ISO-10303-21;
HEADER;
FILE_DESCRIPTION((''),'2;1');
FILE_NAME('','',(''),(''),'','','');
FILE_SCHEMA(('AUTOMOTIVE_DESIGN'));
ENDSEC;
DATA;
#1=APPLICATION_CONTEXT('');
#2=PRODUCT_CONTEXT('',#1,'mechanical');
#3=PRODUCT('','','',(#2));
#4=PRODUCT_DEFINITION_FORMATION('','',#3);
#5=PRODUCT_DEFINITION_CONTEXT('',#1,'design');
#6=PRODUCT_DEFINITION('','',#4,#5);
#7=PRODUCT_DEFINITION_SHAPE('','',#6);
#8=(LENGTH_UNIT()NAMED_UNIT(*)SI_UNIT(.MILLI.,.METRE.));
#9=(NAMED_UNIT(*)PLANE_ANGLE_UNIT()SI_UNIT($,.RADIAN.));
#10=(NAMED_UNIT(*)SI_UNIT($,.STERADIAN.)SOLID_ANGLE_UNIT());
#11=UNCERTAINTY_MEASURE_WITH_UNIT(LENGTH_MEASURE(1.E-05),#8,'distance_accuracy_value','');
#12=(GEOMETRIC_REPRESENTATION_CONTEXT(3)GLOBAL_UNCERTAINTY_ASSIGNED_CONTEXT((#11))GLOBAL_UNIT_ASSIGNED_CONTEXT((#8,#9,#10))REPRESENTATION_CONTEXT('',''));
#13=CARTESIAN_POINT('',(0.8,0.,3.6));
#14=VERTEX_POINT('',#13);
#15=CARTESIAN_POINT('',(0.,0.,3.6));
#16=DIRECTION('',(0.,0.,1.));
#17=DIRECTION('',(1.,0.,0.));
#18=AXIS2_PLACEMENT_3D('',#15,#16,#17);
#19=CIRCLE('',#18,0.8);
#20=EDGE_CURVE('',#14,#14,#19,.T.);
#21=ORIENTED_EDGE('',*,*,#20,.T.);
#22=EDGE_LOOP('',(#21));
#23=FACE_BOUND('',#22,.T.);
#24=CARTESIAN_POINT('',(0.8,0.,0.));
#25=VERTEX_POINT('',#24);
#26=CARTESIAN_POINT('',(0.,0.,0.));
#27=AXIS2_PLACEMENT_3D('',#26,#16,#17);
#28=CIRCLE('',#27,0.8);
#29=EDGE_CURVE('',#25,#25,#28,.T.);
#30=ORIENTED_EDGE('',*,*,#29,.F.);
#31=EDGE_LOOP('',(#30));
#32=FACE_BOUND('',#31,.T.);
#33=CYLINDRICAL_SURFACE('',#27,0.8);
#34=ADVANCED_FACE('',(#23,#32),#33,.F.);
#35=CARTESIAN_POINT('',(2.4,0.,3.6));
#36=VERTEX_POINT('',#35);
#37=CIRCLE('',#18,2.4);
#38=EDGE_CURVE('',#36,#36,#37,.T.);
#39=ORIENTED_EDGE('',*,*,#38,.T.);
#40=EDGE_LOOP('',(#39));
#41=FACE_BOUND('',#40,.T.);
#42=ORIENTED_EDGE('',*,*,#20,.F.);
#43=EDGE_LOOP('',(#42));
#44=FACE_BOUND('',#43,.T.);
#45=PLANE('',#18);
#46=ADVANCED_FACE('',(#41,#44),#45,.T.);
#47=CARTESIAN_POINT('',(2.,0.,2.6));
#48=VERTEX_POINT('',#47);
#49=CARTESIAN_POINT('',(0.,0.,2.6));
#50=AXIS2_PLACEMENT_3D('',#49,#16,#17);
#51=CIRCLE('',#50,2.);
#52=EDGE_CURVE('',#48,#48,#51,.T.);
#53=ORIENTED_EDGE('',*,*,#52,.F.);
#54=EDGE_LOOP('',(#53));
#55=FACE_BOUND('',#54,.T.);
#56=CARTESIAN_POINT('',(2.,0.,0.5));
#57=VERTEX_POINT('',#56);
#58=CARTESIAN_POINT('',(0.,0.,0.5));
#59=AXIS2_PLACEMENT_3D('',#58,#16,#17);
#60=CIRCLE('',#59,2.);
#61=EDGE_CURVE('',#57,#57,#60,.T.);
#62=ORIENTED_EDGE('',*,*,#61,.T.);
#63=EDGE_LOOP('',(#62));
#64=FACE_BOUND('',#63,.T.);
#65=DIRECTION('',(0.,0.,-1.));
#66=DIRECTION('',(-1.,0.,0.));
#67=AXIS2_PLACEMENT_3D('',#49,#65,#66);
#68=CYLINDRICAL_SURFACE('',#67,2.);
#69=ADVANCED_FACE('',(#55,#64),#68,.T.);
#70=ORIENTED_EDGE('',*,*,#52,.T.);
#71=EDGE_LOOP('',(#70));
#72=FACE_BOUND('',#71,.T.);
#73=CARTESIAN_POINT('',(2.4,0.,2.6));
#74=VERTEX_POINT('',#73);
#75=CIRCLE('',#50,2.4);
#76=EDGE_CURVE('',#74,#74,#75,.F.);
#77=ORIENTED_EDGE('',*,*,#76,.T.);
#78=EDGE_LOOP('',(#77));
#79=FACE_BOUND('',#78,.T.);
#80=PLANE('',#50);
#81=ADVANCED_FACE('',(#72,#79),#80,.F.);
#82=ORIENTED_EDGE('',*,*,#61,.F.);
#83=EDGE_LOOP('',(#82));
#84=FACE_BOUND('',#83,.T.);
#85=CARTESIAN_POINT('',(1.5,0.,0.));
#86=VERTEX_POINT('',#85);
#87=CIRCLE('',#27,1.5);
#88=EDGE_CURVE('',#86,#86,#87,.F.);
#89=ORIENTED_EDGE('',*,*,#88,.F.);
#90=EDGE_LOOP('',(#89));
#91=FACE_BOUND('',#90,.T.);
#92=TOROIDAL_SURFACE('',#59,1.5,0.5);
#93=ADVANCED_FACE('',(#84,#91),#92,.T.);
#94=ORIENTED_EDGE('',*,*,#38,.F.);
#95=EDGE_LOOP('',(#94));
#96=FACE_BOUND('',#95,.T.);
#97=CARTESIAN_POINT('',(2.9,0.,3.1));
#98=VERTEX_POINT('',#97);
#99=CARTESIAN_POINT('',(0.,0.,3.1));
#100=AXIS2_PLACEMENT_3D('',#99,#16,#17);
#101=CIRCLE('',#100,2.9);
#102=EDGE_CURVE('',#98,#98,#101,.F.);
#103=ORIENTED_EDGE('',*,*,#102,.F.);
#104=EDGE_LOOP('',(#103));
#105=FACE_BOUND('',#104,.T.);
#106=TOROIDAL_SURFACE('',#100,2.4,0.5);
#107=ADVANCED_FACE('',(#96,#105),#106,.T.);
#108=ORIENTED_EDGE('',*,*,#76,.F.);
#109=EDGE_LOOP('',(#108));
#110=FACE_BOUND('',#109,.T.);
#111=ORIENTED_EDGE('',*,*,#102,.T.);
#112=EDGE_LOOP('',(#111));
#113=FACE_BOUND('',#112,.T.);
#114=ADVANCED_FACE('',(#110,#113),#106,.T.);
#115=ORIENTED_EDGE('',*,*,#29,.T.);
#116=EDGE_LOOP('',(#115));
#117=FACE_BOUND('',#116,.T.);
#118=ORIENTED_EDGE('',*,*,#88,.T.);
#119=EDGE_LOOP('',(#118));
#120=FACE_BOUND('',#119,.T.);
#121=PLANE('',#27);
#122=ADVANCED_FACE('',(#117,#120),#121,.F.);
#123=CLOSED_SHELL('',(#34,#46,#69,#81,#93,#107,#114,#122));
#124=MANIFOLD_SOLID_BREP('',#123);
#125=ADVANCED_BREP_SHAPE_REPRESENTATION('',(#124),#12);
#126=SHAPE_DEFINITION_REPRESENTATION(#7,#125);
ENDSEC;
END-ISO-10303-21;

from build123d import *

# Parameters (mm, degrees)
SKETCH_1_R               = 2
EXTRUDE_1_DEPTH          = 2.6
SKETCH_2_R               = 2.9
EXTRUDE_2_DEPTH          = 1
CUT_EXTRUDE_1_DEPTH      = 6.45710546
CUT_EXTRUDE_1_DEPTH_BACK = 6.45710546
SKETCH_3_R               = 0.8
FILLET_2_R               = 0.5


with BuildPart() as part:
    # 草图1 → 凸台-拉伸1 (new body)
    with BuildSketch(Plane.XY):
        Circle(SKETCH_1_R)
    extrude(amount=EXTRUDE_1_DEPTH)

    # 草图2 → 凸台-拉伸2 (add)
    with BuildSketch(Plane.XY.offset(2.6)):
        Circle(SKETCH_2_R)
    extrude(amount=EXTRUDE_2_DEPTH)

    # 草图3 → 切除-拉伸1 (cut, two sides: drawn at the far end of the back side and taken through both)
    with BuildSketch(Plane.XY.offset(3.6).offset(-CUT_EXTRUDE_1_DEPTH_BACK)):
        Circle(SKETCH_3_R)
    extrude(amount=CUT_EXTRUDE_1_DEPTH + CUT_EXTRUDE_1_DEPTH_BACK, mode=Mode.SUBTRACT)

    # 圆角2
    fillet_2_edges = [part.edges().sort_by_distance(p)[0] for p in [
        (-2, 0, 0),
        (-2.9, 0, 2.6),
        (-2.9, 0, 3.6),
    ]]
    fillet(fillet_2_edges, radius=FILLET_2_R - 0.0001)  # a hair under: the kernel refuses the full size


solid = part.part
